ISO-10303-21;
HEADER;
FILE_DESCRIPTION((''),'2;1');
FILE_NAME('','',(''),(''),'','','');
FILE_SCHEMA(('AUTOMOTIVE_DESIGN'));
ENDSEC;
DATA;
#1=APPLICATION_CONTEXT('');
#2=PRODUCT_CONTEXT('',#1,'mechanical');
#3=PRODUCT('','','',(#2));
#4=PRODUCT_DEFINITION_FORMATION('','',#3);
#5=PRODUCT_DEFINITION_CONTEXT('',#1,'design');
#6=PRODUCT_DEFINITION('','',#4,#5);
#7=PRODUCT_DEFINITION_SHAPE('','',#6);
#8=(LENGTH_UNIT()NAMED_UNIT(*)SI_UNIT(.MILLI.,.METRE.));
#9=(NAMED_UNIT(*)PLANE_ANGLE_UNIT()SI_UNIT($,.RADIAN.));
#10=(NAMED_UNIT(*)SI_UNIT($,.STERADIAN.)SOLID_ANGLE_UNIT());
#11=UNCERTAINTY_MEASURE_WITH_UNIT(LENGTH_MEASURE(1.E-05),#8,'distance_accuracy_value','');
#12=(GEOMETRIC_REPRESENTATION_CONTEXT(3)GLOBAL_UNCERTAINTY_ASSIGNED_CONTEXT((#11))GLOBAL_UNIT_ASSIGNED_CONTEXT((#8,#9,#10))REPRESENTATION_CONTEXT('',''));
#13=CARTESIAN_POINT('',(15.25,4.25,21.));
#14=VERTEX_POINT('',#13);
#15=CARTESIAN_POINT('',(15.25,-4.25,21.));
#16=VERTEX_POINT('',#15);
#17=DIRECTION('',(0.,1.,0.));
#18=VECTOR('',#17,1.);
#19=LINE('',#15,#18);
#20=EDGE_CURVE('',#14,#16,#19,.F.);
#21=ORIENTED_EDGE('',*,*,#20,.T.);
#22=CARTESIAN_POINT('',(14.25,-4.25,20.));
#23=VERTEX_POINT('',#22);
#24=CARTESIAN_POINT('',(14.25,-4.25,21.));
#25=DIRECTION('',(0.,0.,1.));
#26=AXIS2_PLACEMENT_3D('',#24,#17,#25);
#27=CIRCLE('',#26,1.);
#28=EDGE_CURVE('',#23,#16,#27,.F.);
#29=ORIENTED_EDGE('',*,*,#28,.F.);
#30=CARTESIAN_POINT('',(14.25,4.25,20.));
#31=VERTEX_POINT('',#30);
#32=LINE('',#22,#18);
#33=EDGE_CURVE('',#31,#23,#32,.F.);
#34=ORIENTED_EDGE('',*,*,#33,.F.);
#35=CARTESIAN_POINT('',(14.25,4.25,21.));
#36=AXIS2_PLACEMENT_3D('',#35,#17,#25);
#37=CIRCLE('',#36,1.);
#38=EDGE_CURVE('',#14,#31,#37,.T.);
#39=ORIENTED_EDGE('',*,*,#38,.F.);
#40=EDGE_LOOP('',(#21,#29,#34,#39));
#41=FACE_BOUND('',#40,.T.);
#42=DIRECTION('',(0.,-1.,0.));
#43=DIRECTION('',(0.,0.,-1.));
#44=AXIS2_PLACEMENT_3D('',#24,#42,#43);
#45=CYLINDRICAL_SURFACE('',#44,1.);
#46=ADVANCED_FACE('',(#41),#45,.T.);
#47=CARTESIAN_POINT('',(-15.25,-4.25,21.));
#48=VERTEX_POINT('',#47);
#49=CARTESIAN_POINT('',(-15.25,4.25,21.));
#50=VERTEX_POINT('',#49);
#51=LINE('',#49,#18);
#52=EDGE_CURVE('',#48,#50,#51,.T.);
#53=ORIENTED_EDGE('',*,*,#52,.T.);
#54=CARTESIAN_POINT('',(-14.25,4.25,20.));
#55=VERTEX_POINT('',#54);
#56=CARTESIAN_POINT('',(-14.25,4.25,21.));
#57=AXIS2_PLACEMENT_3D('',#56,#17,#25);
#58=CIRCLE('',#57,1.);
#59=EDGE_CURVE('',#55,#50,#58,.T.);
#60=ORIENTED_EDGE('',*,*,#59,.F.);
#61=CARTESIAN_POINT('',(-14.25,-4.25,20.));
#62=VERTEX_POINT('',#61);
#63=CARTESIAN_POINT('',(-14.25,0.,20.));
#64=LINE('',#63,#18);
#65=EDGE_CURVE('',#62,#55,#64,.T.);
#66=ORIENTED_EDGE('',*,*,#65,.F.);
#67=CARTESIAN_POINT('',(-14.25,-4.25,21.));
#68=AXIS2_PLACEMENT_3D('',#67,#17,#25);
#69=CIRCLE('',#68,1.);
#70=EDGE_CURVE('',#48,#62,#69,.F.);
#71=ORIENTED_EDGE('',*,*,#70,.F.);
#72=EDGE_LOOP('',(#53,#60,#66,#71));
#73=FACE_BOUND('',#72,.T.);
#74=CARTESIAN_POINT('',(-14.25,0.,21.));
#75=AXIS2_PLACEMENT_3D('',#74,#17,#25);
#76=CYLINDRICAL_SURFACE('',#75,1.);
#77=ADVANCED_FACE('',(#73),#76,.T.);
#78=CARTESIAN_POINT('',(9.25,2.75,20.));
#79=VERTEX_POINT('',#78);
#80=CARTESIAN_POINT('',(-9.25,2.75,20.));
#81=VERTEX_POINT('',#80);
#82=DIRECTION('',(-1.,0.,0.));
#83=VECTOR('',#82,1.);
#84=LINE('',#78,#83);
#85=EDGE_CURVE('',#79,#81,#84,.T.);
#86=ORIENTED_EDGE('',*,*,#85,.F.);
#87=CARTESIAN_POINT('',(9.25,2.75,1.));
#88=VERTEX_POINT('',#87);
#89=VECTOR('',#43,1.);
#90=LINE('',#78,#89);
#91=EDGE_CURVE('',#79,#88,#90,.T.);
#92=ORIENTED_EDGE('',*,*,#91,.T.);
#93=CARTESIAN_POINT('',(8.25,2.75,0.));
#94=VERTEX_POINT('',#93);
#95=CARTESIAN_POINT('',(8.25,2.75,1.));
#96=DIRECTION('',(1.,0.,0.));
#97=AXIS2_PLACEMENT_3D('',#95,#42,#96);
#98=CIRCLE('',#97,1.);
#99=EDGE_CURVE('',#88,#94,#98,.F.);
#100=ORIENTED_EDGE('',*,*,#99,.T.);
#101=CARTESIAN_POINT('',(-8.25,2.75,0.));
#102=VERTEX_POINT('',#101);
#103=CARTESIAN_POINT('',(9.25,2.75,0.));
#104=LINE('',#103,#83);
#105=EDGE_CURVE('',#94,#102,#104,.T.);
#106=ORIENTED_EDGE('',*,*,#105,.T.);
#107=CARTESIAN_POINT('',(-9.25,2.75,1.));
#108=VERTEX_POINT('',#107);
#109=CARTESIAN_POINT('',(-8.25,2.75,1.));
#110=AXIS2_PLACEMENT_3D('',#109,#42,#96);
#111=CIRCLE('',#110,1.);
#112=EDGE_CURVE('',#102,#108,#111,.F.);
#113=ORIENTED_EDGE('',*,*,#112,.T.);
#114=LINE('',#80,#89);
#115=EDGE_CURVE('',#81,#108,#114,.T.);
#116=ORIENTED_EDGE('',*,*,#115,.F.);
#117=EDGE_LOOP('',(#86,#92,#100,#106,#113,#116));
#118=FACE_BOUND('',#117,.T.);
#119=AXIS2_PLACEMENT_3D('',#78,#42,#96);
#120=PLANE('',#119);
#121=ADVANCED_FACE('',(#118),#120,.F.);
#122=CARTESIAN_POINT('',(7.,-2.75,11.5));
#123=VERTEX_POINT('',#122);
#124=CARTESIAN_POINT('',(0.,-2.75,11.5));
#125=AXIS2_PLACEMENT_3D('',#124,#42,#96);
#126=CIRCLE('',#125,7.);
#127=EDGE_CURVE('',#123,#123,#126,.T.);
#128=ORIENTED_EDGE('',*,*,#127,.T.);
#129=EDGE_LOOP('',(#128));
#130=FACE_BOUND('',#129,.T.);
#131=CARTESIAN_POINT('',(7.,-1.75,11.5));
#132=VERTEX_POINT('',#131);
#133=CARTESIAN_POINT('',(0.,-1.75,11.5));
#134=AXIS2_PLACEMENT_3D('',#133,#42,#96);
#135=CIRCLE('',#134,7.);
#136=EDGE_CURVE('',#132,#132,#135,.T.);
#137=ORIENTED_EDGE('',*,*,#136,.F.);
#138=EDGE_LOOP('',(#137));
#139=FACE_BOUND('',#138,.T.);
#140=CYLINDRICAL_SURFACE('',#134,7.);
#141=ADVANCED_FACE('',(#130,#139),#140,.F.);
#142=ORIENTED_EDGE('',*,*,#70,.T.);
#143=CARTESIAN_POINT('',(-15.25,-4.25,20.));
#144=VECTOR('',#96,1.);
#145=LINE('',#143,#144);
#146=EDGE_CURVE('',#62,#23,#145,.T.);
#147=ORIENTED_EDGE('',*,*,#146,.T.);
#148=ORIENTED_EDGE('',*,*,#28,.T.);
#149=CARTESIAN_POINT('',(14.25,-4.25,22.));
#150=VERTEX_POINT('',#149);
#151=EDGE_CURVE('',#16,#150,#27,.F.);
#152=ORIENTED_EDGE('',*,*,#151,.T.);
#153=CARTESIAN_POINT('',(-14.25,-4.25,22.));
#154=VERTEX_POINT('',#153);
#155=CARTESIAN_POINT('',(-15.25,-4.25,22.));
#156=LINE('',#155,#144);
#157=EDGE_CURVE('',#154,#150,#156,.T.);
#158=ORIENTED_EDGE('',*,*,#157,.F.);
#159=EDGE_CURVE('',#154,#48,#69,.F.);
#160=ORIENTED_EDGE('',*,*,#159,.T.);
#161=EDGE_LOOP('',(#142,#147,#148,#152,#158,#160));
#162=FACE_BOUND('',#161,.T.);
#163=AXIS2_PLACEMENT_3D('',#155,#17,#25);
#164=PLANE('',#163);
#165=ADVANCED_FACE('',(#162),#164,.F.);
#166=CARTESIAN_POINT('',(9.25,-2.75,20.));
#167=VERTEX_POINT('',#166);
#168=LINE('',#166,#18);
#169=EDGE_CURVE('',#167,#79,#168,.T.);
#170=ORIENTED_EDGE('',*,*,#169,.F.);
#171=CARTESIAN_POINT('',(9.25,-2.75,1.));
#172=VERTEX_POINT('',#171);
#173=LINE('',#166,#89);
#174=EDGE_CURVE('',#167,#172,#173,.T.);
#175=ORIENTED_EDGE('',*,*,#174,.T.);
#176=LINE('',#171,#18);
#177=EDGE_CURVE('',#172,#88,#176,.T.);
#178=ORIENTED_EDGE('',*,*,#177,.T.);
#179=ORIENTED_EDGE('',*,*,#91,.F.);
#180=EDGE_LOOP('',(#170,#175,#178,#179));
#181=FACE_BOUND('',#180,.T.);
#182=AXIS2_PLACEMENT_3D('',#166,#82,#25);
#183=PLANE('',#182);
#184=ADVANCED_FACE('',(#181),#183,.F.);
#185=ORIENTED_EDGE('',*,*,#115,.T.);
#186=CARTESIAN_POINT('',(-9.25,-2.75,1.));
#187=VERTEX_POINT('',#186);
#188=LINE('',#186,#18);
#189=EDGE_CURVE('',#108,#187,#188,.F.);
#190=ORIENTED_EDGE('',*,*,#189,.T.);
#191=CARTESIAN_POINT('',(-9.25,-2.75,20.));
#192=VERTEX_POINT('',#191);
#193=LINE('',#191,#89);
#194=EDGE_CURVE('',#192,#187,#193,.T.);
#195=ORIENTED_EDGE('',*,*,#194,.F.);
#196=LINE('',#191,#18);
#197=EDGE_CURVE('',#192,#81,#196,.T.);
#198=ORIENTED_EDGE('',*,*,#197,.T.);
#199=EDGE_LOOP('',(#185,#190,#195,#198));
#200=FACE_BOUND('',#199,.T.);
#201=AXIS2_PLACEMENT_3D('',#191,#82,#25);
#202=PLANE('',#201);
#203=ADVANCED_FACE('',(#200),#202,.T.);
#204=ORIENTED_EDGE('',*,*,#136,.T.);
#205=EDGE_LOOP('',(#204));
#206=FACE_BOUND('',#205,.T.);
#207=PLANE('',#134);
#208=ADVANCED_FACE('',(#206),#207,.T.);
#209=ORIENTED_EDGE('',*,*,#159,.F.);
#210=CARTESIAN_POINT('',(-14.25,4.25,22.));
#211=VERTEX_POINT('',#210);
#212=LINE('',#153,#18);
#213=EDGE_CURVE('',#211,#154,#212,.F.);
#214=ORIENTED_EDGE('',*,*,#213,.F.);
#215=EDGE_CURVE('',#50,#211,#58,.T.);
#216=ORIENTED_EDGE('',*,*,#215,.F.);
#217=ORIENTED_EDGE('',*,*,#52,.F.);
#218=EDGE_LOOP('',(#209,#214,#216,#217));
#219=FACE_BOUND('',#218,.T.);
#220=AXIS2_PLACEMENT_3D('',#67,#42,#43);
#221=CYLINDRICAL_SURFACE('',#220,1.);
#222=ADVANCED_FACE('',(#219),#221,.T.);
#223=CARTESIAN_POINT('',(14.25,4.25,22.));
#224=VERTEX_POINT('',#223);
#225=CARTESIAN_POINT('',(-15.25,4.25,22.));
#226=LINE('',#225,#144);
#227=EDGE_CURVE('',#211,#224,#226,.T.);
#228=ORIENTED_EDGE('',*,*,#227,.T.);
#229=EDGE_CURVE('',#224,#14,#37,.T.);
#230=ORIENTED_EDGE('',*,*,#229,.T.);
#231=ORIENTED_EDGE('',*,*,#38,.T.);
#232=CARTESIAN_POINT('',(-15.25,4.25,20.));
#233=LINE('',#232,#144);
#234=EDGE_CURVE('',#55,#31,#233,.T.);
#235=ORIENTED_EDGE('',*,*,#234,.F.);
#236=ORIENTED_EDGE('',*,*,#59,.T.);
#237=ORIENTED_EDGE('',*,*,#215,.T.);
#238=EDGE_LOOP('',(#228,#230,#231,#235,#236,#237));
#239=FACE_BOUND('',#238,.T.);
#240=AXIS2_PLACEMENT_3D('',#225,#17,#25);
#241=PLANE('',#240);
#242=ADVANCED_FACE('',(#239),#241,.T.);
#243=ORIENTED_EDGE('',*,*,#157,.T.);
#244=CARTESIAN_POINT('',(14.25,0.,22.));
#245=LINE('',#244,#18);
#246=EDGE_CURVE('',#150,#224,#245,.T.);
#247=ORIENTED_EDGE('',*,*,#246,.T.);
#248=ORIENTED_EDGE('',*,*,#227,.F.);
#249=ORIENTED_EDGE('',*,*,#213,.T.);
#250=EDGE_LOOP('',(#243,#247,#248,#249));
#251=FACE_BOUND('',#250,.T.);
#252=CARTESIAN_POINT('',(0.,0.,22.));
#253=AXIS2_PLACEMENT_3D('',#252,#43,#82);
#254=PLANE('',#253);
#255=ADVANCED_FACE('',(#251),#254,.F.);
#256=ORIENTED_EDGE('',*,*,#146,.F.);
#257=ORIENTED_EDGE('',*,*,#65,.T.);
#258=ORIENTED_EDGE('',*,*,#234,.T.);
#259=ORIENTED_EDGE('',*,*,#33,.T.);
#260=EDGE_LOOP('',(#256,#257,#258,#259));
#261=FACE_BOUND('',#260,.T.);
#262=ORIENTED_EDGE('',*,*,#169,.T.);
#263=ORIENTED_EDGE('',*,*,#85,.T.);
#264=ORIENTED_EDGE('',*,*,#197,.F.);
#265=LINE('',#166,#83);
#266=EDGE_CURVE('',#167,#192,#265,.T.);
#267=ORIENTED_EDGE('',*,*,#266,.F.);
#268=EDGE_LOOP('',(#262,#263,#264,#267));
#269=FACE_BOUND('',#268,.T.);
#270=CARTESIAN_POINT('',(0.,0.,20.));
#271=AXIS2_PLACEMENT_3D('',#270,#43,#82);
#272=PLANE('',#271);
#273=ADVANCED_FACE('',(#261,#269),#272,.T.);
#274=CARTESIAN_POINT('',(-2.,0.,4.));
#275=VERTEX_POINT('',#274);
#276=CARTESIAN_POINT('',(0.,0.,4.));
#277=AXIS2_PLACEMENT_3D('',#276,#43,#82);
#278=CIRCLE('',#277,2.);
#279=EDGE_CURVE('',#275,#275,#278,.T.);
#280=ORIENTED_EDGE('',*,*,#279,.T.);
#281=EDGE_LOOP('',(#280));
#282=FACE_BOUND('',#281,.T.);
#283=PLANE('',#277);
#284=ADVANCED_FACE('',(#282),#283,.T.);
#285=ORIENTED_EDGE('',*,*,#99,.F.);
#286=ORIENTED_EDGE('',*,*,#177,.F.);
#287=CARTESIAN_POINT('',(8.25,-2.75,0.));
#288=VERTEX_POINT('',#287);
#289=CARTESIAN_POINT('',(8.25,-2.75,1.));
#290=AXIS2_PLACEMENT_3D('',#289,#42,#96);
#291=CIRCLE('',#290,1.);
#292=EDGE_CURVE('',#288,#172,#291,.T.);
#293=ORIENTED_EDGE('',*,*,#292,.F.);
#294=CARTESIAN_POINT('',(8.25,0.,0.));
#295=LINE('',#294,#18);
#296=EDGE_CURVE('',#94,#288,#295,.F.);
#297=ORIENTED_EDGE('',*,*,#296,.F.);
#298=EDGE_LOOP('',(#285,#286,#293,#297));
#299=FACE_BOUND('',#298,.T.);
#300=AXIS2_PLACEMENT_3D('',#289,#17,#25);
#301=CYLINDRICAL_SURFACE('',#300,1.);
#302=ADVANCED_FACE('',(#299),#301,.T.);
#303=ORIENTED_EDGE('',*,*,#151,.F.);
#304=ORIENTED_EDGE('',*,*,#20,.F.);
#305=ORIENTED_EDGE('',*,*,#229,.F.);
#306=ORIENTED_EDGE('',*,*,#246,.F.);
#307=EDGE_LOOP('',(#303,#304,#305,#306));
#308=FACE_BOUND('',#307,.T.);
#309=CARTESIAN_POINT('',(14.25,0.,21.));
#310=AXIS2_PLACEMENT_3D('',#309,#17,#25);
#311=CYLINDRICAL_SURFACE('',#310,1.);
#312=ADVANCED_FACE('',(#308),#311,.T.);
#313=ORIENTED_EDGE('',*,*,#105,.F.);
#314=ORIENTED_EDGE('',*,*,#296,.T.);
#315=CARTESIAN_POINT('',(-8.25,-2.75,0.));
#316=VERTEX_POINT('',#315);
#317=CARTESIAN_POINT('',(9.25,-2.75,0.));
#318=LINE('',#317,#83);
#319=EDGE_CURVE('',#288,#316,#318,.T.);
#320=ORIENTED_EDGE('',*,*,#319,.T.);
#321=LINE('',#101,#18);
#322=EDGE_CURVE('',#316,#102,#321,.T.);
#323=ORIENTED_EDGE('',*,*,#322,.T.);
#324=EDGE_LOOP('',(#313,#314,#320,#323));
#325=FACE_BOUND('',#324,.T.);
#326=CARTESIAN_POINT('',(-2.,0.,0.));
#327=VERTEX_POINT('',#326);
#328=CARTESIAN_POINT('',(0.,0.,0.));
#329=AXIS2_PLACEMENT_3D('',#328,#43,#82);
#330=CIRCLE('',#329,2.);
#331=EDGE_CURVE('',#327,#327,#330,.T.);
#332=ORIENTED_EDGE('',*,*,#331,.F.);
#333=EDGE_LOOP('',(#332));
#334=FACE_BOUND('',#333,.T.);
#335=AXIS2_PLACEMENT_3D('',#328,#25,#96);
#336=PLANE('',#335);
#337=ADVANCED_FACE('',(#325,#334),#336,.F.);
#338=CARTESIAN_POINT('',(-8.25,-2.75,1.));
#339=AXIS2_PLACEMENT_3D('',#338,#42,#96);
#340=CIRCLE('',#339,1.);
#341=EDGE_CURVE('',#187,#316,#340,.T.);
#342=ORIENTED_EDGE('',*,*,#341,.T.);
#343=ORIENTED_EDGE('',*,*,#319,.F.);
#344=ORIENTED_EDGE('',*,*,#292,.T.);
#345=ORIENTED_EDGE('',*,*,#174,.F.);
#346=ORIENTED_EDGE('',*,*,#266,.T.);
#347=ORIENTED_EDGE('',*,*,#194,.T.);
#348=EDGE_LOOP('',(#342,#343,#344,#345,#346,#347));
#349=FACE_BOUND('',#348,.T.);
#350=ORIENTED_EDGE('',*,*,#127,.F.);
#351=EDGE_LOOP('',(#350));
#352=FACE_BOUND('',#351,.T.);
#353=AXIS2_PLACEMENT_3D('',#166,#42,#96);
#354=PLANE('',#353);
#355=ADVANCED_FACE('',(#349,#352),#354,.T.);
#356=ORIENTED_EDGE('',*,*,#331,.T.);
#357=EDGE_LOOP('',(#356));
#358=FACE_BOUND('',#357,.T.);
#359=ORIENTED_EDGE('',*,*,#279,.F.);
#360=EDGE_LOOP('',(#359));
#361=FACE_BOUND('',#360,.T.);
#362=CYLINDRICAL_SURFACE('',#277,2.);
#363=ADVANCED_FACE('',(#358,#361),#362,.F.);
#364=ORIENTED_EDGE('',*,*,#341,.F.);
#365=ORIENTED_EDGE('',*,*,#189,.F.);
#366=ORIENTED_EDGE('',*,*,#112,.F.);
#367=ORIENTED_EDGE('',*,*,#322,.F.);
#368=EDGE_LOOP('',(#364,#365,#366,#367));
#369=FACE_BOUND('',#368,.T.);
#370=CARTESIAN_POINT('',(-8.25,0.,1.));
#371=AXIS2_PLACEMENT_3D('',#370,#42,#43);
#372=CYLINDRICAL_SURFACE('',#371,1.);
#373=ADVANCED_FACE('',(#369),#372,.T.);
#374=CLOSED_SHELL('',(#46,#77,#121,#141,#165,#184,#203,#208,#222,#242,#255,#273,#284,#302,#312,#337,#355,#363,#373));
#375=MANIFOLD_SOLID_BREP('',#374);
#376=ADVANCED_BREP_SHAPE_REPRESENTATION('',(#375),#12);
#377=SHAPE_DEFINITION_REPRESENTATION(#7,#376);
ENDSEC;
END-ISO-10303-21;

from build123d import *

# Parameters (mm, degrees)
CROQUIS1_W              = 18.5
CROQUIS1_H              = 5.5
SALIENTE_EXTRUIR1_DEPTH = 20
CROQUIS4_R              = 7
CORTAR_EXTRUIR1_DEPTH   = 1
CROQUIS5_W              = 30.5
CROQUIS5_H              = 8.5
SALIENTE_EXTRUIR2_DEPTH = 2
REDONDEO2_R             = 1
REDONDEO3_R             = 1
REDONDEO4_R             = 1
REDONDEO5_R             = 1
CROQUIS6_R              = 2
CORTAR_EXTRUIR2_DEPTH   = 4
REDONDEO6_R             = 1
REDONDEO7_R             = 1


with BuildPart() as part:
    # Croquis1 → Saliente-Extruir1 (new body)
    with BuildSketch(Plane.XY):
        Rectangle(CROQUIS1_W, CROQUIS1_H)
    extrude(amount=SALIENTE_EXTRUIR1_DEPTH)

    # Croquis4 → Cortar-Extruir1 (cut)
    with BuildSketch(Plane.XZ.offset(2.75)):
        with Locations((0, 11.5)):
            Circle(CROQUIS4_R)
    extrude(amount=-CORTAR_EXTRUIR1_DEPTH, mode=Mode.SUBTRACT)

    # Croquis5 → Saliente-Extruir2 (add)
    with BuildSketch(Plane.XY.offset(20)):
        Rectangle(CROQUIS5_W, CROQUIS5_H)
    extrude(amount=SALIENTE_EXTRUIR2_DEPTH)

    # Redondeo2
    redondeo2_edges = [part.edges().sort_by_distance(p)[0] for p in [
        (-15.25, 0, 22),
    ]]
    fillet(redondeo2_edges, radius=REDONDEO2_R)

    # Redondeo3
    redondeo3_edges = [part.edges().sort_by_distance(p)[0] for p in [
        (-15.25, 0, 20),
    ]]
    fillet(redondeo3_edges, radius=REDONDEO3_R - 0.0001)  # a hair under: the kernel refuses the full size

    # Redondeo4
    redondeo4_edges = [part.edges().sort_by_distance(p)[0] for p in [
        (15.25, 0, 22),
    ]]
    fillet(redondeo4_edges, radius=REDONDEO4_R)

    # Redondeo5
    redondeo5_edges = [part.edges().sort_by_distance(p)[0] for p in [
        (15.25, 0, 20),
    ]]
    fillet(redondeo5_edges, radius=REDONDEO5_R - 0.0001)  # a hair under: the kernel refuses the full size

    # Croquis6 → Cortar-Extruir2 (cut)
    with BuildSketch(Plane(origin=(0, 0, 0), x_dir=(-1, 0, 0), z_dir=(0, 0, -1))):
        Circle(CROQUIS6_R)
    extrude(amount=-CORTAR_EXTRUIR2_DEPTH, mode=Mode.SUBTRACT)

    # Redondeo6
    redondeo6_edges = [part.edges().sort_by_distance(p)[0] for p in [
        (-9.25, 0, 0),
    ]]
    fillet(redondeo6_edges, radius=REDONDEO6_R)

    # Redondeo7
    redondeo7_edges = [part.edges().sort_by_distance(p)[0] for p in [
        (9.25, 0, 0),
    ]]
    fillet(redondeo7_edges, radius=REDONDEO7_R)


solid = part.part
